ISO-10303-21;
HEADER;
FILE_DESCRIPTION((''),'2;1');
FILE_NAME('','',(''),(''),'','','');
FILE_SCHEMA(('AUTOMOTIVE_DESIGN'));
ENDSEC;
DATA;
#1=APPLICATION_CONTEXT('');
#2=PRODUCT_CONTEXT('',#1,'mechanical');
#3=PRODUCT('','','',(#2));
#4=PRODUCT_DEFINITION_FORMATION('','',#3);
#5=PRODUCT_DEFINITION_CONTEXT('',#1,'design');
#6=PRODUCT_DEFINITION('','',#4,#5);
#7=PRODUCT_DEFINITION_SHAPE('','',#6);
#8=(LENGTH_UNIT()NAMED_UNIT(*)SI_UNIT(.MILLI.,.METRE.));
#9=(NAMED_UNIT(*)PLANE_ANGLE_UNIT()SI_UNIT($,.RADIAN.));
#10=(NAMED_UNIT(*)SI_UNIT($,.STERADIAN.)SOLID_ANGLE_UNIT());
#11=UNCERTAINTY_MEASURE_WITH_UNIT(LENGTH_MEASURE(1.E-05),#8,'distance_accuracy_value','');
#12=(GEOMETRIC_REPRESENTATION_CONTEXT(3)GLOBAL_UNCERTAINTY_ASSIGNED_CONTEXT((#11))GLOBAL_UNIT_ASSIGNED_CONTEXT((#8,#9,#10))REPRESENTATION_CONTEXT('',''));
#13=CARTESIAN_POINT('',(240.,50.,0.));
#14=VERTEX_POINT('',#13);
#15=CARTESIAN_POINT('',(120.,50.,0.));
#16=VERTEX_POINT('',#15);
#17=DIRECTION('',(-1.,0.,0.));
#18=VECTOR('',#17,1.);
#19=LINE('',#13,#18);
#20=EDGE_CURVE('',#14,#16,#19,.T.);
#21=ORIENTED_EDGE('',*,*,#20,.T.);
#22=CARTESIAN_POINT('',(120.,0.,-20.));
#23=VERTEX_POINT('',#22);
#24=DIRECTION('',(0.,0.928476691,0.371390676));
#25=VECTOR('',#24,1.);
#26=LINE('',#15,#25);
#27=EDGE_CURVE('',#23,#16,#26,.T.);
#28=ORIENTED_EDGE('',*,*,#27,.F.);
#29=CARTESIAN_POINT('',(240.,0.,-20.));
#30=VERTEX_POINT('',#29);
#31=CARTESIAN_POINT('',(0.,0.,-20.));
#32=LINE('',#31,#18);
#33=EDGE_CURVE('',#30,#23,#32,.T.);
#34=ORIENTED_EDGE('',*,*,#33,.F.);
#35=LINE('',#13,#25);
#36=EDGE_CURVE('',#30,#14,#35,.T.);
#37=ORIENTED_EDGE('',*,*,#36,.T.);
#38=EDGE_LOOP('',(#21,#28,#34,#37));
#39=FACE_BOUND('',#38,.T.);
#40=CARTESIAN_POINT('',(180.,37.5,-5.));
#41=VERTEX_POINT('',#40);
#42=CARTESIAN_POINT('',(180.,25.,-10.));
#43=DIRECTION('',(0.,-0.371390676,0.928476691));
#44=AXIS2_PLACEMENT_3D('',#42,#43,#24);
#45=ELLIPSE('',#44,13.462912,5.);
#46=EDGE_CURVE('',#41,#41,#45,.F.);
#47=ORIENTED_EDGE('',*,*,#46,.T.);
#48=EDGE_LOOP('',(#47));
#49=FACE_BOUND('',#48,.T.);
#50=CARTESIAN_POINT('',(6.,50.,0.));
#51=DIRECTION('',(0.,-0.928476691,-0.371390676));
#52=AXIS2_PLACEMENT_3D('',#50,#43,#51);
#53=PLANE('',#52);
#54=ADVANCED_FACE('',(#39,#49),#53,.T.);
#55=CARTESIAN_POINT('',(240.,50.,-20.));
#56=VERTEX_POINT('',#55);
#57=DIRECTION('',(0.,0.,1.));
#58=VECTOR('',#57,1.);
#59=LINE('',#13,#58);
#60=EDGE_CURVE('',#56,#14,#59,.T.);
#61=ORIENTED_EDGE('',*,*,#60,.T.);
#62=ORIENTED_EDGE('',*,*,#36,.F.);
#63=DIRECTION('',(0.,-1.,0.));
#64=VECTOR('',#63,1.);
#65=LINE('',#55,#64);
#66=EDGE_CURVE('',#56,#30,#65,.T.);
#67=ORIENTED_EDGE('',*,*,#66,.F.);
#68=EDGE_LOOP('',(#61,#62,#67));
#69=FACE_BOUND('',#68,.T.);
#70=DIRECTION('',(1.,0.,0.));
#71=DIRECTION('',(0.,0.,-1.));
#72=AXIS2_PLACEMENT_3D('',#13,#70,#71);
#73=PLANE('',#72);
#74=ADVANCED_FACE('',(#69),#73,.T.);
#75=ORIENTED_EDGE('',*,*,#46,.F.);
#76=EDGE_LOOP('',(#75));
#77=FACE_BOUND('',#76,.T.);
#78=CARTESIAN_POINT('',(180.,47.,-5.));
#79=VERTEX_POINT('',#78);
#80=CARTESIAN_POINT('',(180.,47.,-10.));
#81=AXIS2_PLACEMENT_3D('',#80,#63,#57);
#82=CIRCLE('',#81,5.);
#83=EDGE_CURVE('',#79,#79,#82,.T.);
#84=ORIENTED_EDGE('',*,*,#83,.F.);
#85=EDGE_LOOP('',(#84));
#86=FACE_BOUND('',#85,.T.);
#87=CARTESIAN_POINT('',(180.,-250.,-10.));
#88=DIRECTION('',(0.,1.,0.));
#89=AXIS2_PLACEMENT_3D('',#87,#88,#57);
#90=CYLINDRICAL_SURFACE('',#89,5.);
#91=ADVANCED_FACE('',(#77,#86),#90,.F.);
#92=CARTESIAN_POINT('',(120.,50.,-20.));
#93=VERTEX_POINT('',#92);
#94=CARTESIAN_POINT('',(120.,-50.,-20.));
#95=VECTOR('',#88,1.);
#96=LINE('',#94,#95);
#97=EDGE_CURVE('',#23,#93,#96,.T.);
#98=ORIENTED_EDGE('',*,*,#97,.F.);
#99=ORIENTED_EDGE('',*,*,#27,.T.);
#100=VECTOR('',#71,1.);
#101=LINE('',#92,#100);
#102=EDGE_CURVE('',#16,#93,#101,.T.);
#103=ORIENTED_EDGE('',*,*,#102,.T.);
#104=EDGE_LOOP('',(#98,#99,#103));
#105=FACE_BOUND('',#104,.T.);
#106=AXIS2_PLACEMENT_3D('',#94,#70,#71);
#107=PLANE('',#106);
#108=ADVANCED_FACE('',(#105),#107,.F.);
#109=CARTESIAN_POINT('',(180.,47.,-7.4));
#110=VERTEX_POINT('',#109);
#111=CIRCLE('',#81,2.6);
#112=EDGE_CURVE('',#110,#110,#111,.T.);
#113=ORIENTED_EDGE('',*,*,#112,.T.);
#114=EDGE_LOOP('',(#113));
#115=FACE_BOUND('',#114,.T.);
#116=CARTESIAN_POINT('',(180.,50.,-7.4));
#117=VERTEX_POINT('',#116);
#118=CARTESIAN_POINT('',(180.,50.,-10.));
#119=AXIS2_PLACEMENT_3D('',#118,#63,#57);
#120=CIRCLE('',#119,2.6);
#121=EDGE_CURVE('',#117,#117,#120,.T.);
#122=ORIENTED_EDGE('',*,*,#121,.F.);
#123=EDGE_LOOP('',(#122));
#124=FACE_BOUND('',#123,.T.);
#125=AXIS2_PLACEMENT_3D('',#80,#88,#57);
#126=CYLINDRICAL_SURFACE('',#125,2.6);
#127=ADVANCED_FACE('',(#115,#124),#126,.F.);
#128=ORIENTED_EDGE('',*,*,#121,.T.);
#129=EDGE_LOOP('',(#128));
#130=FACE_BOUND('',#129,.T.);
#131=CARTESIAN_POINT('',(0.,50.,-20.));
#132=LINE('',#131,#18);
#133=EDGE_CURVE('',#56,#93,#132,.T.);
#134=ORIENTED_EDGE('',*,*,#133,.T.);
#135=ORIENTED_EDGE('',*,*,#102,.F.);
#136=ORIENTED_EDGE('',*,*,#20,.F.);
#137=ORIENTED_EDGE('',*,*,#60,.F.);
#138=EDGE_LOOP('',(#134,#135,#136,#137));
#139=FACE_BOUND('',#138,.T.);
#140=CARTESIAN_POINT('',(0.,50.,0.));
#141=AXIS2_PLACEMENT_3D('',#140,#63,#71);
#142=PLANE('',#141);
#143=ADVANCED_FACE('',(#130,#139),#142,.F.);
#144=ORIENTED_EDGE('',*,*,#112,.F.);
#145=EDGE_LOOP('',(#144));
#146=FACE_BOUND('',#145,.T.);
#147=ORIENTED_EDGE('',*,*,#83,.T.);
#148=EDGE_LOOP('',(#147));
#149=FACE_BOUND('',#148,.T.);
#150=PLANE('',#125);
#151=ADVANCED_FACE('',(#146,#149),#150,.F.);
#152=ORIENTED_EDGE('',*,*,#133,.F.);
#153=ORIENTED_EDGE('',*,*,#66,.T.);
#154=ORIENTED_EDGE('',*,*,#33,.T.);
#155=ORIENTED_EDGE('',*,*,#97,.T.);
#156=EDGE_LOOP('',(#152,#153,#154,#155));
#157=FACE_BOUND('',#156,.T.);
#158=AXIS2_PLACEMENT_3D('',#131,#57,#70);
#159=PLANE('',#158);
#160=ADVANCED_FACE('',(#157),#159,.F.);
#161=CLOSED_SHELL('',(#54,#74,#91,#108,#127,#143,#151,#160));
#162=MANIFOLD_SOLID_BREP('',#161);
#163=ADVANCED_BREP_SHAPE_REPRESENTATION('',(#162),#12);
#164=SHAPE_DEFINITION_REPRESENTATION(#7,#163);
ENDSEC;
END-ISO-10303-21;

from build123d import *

# Parameters (mm, degrees)
SKETCH_1_W          = 120
SKETCH_1_H          = 20
EXTRUDE_1_DEPTH     = 50
SKETCH_2_W          = 6
SKETCH_2_H          = 20
EXTRUDE_2_DEPTH     = 20
CUT_EXTRUDE_1_DEPTH = 114
SKETCH_4_R          = 2.6
SKETCH_4_W          = 20
SKETCH_4_H          = 20
CUT_EXTRUDE_2_DEPTH = 114
SKETCH_5_R          = 5
CUT_EXTRUDE_3_DEPTH = 3
SKETCH_6_R          = 2.6
CUT_EXTRUDE_4_DEPTH = 300
SKETCH_8_R          = 5
CUT_EXTRUDE_5_DEPTH = 300
SKETCH_9_R          = 5
SKETCH_9_R_2        = 2.6
EXTRUDE_3_DEPTH     = 3
SKETCH_11_W         = 120
SKETCH_11_H         = 20
CUT_EXTRUDE_6_DEPTH = 100
CUT_EXTRUDE_7_DEPTH = 10


with BuildPart() as part:
    # 草图1 → 凸台-拉伸1 (new body)
    with BuildSketch(Plane(origin=(0, 0, 0), x_dir=(1, 0, 0), z_dir=(0, 1, 0))):
        with Locations((60, 10)):
            Rectangle(SKETCH_1_W, SKETCH_1_H)
    extrude_1 = extrude(amount=EXTRUDE_1_DEPTH)

    # 草图2 → 凸台-拉伸2 (add)
    with BuildSketch(Plane.XY):
        with Locations((3, -10)):
            Rectangle(SKETCH_2_W, SKETCH_2_H)
    extrude_2 = extrude(amount=-EXTRUDE_2_DEPTH)

    # 草图3 → 切除-拉伸1 (cut)
    with BuildSketch(Plane(origin=(120, 0, 0), x_dir=(0, 0, -1), z_dir=(1, 0, 0))):
        Polygon((0, 50), (20, 0), (0, 0), align=None)
    cut_extrude_1 = extrude(amount=-CUT_EXTRUDE_1_DEPTH, mode=Mode.SUBTRACT)

    # 草图4 → 切除-拉伸2 (cut)
    with BuildSketch(Plane(origin=(6, 0, 0), x_dir=(0, 0, -1), z_dir=(1, 0, 0))):
        with Locations((10, 10)):
            Circle(SKETCH_4_R)
        with Locations((10, -10)):
            Rectangle(SKETCH_4_W, SKETCH_4_H)
    cut_extrude_2 = extrude(amount=-CUT_EXTRUDE_2_DEPTH, mode=Mode.SUBTRACT)

    # 草图5 → 切除-拉伸3 (cut)
    with BuildSketch(Plane(origin=(6, 0, 0), x_dir=(0, 0, -1), z_dir=(1, 0, 0))):
        with Locations((10, 10)):
            Circle(SKETCH_5_R)
    cut_extrude_3 = extrude(amount=-CUT_EXTRUDE_3_DEPTH, mode=Mode.SUBTRACT)

    # 草图6 → 切除-拉伸4 (cut)
    with BuildSketch(Plane(origin=(0, 50, 0), x_dir=(1, 0, 0), z_dir=(0, 1, 0))):
        with Locations((60, 10)):
            Circle(SKETCH_6_R)
    extrude(amount=-CUT_EXTRUDE_4_DEPTH, mode=Mode.SUBTRACT)

    # 草图8 → 切除-拉伸5 (cut)
    with BuildSketch(Plane(origin=(0, 50, 0), x_dir=(1, 0, 0), z_dir=(0, 1, 0))):
        with Locations((60, 10)):
            Circle(SKETCH_8_R)
    cut_extrude_5 = extrude(amount=-CUT_EXTRUDE_5_DEPTH, mode=Mode.SUBTRACT)

    # 草图9 → 凸台-拉伸3 (add)
    with BuildSketch(Plane(origin=(0, 50, 0), x_dir=(1, 0, 0), z_dir=(0, 1, 0))):
        with Locations((60, 10)):
            Circle(SKETCH_9_R)
        with Locations((60, 10)):
            Circle(SKETCH_9_R_2, mode=Mode.SUBTRACT)
    extrude_3 = extrude(amount=-EXTRUDE_3_DEPTH)

    # 镜向2: 凸台-拉伸1, 凸台-拉伸2, 切除-拉伸1, 切除-拉伸2, 切除-拉伸3, 切除-拉伸5, 凸台-拉伸3 across plane
    add(extrude_1.mirror(Plane(origin=(120, 50, 0), x_dir=(0, 0, 1), z_dir=(-1, 0, 0))))
    add(extrude_2.mirror(Plane(origin=(120, 50, 0), x_dir=(0, 0, 1), z_dir=(-1, 0, 0))))
    add(cut_extrude_1.mirror(Plane(origin=(120, 50, 0), x_dir=(0, 0, 1), z_dir=(-1, 0, 0))), mode=Mode.SUBTRACT)
    add(cut_extrude_2.mirror(Plane(origin=(120, 50, 0), x_dir=(0, 0, 1), z_dir=(-1, 0, 0))), mode=Mode.SUBTRACT)
    add(cut_extrude_3.mirror(Plane(origin=(120, 50, 0), x_dir=(0, 0, 1), z_dir=(-1, 0, 0))), mode=Mode.SUBTRACT)
    add(cut_extrude_5.mirror(Plane(origin=(120, 50, 0), x_dir=(0, 0, 1), z_dir=(-1, 0, 0))), mode=Mode.SUBTRACT)
    add(extrude_3.mirror(Plane(origin=(120, 50, 0), x_dir=(0, 0, 1), z_dir=(-1, 0, 0))))

    # 草图11 → 切除-拉伸6 (cut)
    with BuildSketch(Plane(origin=(0, 50, 0), x_dir=(1, 0, 0), z_dir=(0, 1, 0))):
        with Locations((60, 10)):
            Rectangle(SKETCH_11_W, SKETCH_11_H)
    extrude(amount=-CUT_EXTRUDE_6_DEPTH, mode=Mode.SUBTRACT)

    # 草图12 → 切除-拉伸7 (cut)
    with BuildSketch(Plane.ZY.offset(-234)):
        Polygon((-20, 0), (0, 0), (0, 50), align=None)
    extrude(amount=-CUT_EXTRUDE_7_DEPTH, mode=Mode.SUBTRACT)


solid = part.part
